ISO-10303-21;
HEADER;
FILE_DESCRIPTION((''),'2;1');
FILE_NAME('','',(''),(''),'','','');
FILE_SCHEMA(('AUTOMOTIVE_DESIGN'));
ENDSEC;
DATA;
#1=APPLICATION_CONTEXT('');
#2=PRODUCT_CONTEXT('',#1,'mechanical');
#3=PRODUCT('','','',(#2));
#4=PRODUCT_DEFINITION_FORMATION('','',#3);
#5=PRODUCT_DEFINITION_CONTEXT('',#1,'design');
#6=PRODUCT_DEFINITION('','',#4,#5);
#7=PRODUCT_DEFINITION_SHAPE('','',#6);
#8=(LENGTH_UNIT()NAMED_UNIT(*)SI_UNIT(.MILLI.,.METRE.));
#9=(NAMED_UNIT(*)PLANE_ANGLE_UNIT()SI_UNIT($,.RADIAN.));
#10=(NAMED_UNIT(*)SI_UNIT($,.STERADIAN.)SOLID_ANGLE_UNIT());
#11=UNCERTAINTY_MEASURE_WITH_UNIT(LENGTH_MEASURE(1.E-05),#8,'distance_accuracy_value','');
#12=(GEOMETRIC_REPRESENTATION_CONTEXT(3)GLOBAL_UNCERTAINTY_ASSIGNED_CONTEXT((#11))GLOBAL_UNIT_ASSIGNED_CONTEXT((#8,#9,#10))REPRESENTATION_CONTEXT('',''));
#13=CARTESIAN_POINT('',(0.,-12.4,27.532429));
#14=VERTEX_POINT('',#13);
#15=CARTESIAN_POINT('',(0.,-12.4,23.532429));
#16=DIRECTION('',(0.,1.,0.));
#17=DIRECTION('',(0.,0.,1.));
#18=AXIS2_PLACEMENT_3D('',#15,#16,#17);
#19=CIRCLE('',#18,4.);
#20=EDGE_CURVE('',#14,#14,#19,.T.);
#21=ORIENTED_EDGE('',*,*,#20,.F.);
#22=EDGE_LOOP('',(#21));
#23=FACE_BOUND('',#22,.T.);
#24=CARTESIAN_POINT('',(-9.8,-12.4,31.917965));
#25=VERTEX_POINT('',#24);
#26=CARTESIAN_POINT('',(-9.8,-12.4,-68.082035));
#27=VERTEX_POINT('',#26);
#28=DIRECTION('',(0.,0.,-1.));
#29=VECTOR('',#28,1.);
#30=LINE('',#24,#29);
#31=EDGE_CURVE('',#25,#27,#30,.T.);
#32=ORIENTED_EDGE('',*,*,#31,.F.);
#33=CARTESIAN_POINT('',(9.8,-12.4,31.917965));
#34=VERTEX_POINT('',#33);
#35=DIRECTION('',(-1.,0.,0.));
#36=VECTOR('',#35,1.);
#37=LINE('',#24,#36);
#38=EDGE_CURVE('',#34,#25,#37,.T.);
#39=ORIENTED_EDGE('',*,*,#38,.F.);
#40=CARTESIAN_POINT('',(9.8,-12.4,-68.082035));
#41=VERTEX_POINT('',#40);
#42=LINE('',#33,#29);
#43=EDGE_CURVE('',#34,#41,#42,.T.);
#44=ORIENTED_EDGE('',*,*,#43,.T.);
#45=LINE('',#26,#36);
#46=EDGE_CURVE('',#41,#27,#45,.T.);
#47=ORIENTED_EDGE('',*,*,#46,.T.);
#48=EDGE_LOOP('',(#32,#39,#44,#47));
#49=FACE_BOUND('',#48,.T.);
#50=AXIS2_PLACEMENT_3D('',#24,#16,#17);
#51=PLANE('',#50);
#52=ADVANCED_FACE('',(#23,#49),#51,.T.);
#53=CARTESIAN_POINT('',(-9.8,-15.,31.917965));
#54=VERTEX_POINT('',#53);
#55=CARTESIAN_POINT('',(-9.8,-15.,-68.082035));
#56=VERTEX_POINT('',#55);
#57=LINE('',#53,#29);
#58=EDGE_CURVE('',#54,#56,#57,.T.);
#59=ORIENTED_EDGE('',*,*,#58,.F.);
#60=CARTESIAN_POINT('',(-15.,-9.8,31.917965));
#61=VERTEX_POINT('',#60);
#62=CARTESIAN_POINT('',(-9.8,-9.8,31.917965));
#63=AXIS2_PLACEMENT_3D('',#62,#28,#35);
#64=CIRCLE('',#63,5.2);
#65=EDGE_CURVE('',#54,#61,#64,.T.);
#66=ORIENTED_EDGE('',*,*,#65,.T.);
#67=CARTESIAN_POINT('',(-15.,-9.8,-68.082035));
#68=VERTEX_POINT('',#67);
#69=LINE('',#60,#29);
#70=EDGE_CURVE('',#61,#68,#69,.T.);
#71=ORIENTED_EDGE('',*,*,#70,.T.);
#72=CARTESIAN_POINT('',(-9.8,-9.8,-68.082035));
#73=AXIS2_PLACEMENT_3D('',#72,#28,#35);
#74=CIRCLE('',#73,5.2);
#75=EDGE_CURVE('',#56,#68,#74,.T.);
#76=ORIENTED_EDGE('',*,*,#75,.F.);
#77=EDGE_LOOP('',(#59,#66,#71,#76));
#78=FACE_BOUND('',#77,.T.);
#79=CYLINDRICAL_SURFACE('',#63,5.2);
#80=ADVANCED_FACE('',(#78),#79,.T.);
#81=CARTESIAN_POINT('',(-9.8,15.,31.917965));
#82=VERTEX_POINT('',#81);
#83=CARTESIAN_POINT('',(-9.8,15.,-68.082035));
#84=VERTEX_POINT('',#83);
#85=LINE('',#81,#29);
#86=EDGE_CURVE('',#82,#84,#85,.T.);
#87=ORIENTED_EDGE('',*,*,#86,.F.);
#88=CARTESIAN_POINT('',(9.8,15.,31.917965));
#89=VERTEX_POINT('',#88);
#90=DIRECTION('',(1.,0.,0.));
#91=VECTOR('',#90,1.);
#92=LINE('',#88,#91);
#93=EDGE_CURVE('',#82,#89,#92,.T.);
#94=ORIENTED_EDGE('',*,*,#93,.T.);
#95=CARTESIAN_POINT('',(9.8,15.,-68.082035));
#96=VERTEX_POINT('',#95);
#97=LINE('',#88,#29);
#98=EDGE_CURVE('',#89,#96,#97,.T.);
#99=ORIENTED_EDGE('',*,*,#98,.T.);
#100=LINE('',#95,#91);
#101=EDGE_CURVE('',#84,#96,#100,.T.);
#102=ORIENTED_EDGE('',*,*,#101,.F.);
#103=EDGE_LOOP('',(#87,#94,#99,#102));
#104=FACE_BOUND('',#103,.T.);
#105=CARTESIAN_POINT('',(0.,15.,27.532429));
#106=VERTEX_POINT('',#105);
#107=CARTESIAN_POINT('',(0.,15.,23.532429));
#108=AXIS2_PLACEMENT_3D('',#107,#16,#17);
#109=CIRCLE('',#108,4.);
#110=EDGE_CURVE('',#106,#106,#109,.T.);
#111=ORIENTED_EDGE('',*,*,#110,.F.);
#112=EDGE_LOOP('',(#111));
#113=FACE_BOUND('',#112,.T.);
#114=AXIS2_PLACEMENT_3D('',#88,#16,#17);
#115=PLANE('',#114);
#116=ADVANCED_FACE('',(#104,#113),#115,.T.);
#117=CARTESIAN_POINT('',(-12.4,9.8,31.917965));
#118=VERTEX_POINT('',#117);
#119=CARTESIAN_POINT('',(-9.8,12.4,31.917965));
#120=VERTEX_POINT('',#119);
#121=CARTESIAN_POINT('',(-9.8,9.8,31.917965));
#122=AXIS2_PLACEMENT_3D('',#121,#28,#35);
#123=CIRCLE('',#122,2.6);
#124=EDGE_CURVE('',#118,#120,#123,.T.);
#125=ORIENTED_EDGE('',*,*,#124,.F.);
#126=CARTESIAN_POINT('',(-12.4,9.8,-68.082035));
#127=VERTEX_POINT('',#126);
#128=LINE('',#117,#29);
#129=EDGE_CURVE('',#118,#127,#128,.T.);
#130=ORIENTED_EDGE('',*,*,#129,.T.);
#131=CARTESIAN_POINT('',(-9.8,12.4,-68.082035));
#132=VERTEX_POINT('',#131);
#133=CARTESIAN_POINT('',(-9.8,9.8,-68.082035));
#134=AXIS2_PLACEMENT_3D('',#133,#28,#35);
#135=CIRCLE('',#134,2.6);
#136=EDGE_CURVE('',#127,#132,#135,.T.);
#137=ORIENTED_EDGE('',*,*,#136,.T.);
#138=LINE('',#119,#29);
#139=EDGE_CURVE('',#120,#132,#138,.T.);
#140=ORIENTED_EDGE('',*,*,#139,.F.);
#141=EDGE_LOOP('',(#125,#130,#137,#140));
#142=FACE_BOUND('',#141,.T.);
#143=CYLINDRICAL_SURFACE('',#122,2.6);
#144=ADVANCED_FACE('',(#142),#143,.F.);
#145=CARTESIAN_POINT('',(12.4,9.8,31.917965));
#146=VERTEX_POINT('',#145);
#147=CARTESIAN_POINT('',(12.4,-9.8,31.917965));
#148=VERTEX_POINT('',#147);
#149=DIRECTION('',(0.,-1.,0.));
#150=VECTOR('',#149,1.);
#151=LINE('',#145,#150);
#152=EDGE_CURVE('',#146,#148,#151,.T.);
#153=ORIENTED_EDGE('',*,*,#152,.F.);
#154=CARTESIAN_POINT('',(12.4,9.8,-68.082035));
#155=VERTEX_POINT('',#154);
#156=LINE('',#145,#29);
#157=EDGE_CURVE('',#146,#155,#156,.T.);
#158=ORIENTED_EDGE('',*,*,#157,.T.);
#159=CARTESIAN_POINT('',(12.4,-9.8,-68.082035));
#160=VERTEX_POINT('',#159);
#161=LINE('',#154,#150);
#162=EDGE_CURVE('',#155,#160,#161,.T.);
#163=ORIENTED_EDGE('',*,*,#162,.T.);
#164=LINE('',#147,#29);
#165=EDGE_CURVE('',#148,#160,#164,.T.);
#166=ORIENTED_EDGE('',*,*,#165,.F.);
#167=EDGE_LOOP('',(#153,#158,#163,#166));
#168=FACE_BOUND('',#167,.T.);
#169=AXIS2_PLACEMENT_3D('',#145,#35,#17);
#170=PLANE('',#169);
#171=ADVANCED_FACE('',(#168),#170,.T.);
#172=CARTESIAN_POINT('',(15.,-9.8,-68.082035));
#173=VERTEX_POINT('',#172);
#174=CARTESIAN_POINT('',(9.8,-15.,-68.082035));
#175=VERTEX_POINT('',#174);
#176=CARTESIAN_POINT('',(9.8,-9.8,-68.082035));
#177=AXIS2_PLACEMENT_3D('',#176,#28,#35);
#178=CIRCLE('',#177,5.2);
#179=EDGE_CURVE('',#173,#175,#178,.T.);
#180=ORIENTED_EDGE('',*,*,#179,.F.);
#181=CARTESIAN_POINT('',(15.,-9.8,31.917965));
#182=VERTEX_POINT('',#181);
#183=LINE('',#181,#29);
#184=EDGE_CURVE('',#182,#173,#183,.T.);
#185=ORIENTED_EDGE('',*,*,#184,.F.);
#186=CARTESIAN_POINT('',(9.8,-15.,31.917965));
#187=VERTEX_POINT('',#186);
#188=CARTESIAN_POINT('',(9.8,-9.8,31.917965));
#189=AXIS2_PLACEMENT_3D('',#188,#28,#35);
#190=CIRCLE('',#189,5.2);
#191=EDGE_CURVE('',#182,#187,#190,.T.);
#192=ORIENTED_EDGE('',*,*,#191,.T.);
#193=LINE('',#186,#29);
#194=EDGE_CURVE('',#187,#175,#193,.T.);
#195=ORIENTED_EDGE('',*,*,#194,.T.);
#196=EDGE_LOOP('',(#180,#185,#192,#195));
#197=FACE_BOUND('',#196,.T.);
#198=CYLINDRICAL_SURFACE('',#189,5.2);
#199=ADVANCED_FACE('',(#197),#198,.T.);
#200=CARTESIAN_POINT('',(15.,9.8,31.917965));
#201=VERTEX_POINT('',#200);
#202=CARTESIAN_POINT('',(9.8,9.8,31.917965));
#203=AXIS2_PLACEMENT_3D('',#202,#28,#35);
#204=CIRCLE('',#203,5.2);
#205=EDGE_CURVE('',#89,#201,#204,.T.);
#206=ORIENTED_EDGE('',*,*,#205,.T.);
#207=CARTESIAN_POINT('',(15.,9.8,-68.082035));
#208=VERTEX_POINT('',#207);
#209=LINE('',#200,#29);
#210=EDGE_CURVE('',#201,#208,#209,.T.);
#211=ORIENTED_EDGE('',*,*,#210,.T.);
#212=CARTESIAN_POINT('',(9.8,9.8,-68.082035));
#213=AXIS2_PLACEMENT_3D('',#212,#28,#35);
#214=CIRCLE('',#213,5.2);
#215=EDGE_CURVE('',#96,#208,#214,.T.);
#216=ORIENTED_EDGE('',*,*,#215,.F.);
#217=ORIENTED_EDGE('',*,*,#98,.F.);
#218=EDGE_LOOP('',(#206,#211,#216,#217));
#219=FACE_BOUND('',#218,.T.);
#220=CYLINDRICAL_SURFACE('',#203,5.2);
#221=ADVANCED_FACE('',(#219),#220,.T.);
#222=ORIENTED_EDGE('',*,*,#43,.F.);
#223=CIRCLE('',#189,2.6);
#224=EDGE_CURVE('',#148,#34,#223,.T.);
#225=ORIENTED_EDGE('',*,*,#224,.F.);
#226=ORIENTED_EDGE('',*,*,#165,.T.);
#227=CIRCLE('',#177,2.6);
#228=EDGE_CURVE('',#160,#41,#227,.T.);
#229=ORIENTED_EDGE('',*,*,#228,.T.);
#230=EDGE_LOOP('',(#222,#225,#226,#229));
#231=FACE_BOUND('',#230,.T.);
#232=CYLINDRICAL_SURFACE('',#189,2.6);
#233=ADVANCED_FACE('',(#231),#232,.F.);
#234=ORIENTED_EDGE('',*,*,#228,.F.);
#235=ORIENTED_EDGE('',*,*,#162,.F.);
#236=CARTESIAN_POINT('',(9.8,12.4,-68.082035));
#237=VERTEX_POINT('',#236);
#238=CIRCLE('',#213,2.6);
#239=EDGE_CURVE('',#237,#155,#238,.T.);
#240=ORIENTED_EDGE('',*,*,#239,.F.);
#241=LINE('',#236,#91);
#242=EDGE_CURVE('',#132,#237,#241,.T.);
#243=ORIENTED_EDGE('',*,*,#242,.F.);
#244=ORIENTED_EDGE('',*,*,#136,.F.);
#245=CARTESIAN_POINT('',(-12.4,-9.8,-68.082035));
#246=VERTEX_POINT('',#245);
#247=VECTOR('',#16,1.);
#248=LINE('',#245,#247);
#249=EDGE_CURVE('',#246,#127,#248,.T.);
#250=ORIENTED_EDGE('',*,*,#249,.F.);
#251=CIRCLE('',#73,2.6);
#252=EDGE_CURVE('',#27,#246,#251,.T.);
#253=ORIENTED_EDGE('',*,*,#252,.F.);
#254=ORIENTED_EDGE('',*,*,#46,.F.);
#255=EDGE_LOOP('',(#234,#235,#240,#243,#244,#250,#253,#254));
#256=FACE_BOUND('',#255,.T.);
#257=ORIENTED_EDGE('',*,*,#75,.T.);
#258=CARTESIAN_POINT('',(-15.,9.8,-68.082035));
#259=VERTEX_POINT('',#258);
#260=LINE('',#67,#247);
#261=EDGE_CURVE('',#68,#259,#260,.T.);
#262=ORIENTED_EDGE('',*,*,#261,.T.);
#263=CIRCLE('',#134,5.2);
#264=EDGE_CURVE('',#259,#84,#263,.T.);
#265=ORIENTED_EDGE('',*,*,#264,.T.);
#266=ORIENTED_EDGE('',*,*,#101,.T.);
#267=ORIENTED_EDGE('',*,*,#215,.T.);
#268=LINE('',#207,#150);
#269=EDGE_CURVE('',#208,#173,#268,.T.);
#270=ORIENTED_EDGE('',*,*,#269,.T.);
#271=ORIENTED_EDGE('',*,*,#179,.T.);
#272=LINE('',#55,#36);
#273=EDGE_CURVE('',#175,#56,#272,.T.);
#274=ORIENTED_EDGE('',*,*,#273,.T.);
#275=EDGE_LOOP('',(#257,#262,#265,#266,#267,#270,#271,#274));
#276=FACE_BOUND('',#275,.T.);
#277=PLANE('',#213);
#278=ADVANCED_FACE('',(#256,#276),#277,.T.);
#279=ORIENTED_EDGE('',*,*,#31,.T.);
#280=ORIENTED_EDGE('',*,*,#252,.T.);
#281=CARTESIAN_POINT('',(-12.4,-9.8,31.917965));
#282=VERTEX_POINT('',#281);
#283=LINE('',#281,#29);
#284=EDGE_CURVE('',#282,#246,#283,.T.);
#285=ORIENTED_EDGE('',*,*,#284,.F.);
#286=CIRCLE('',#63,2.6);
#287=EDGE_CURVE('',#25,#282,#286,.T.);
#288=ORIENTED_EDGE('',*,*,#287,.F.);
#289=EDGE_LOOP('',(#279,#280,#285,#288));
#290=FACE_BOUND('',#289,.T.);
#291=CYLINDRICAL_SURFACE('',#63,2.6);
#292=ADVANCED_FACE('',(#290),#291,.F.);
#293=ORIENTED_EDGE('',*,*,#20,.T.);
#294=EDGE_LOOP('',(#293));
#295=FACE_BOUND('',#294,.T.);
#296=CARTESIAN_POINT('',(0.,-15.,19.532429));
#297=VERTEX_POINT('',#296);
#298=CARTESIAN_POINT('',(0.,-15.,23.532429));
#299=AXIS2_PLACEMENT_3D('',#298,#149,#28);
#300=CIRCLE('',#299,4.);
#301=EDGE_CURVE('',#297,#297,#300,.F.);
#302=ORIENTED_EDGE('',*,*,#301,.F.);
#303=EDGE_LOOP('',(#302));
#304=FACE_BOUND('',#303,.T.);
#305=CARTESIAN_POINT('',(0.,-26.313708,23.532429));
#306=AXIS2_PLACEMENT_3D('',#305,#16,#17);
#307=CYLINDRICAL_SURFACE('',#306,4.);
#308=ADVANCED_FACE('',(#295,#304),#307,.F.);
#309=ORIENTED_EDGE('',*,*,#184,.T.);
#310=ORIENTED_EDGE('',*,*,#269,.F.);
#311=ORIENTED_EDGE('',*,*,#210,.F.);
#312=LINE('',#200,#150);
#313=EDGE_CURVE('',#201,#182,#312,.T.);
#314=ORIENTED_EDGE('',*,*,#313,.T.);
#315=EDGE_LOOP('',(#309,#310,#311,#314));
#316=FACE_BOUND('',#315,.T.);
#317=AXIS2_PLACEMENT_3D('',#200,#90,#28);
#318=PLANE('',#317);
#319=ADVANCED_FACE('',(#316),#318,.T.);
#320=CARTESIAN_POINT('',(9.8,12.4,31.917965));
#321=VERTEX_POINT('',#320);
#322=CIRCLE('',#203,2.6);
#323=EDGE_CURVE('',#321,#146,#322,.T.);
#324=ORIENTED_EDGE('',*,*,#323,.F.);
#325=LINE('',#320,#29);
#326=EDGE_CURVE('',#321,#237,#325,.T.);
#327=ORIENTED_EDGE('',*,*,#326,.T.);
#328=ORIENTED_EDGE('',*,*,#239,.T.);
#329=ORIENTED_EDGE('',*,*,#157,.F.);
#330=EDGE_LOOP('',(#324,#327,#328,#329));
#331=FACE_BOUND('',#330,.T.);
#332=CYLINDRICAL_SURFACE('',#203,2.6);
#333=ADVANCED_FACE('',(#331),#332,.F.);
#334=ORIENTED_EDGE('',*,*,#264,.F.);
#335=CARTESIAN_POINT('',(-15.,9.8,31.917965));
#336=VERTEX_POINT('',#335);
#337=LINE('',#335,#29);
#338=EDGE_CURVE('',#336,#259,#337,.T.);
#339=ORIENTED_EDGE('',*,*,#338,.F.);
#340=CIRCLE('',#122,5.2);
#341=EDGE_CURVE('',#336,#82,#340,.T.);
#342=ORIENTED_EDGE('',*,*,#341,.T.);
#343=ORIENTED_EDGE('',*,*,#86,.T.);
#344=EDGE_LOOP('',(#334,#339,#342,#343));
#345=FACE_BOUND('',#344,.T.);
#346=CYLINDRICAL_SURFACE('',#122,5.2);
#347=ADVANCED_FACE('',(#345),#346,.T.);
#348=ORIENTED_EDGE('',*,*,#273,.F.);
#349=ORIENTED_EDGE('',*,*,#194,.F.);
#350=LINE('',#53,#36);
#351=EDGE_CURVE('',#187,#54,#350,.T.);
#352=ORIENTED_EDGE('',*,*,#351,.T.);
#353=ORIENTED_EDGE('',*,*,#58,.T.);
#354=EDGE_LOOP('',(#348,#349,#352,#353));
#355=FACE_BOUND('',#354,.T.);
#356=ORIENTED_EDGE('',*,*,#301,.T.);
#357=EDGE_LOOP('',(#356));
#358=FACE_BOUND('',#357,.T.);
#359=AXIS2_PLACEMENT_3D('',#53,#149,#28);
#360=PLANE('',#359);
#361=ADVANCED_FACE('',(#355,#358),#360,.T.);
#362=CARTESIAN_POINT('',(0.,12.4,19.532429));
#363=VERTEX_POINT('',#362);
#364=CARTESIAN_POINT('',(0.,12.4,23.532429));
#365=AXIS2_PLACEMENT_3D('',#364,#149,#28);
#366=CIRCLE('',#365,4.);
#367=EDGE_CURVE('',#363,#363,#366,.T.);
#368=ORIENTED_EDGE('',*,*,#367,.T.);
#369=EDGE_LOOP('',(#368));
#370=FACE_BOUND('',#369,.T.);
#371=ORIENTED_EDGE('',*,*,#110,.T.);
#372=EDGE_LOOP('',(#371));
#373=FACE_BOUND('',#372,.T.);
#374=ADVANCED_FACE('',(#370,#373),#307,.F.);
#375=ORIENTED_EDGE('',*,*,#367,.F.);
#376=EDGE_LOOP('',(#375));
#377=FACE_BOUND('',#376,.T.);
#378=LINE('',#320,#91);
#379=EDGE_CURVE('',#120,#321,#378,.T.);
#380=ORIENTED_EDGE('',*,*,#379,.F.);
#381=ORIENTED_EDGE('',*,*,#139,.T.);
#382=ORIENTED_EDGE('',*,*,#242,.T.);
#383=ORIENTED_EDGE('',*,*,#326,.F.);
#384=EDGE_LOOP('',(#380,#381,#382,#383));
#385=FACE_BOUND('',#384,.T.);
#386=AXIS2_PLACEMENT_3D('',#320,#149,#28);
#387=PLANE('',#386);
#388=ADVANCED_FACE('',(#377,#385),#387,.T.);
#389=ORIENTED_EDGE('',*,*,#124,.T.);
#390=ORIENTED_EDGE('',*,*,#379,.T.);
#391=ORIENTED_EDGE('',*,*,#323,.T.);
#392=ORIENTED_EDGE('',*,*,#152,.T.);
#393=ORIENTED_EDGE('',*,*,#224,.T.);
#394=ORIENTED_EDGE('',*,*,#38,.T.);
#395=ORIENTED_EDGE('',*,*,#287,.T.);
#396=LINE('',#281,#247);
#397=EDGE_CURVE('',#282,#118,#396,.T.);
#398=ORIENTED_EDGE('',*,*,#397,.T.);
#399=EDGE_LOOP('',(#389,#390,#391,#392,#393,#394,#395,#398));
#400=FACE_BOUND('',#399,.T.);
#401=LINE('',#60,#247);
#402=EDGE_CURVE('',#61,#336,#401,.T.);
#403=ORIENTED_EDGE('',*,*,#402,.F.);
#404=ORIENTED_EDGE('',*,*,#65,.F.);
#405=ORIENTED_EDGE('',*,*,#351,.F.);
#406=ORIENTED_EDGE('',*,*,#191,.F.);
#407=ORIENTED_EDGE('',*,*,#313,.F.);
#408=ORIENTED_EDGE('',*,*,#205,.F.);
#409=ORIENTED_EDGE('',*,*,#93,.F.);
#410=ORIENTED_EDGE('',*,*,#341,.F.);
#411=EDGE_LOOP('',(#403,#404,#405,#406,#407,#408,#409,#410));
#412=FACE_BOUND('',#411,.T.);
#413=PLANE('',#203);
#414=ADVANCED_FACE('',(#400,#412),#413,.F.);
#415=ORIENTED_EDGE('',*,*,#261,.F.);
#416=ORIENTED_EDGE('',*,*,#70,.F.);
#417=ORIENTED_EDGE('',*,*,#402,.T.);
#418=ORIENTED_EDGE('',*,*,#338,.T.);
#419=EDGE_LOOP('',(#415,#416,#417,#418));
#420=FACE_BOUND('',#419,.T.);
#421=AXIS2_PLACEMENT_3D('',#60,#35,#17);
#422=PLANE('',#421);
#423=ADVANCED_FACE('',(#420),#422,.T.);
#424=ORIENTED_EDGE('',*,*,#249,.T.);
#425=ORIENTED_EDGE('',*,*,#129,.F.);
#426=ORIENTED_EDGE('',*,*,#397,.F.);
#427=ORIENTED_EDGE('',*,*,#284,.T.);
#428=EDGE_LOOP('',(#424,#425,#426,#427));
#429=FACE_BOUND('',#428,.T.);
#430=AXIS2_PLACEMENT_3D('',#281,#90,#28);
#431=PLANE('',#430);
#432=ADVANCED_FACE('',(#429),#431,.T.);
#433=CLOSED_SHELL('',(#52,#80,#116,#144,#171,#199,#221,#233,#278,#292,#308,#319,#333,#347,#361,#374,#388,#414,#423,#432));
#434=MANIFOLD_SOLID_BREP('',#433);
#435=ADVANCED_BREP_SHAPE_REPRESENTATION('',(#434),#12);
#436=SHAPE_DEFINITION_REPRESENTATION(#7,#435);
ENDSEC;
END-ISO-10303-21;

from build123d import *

# Parameters (mm, degrees)
SISTEMA_START              = -68.082035122
SISTEMA_ESTRUCTURAL2_DEPTH = 100
CORTAR_EXTRUIR1_REACH      = 77.896
CROQUIS9_R                 = 4


# Read off the part's stored shape, not the designer's step: Sistema estructural2
with BuildPart() as part:
    # Sistema estructural2 outline → Sistema estructural2 (new body)
    with BuildSketch(Plane.XY.offset(SISTEMA_START)):
        with BuildLine():
            ThreePointArc((15, 9.8), (13.476955262, 13.476955262), (9.8, 15))
            Line((9.8, 15), (-9.8, 15))
            ThreePointArc((-9.8, 15), (-13.476955262, 13.476955262), (-15, 9.8))
            Line((-15, 9.8), (-15, -9.8))
            ThreePointArc((-15, -9.8), (-13.476955262, -13.476955262), (-9.8, -15))
            Line((-9.8, -15), (9.8, -15))
            ThreePointArc((9.8, -15), (13.476955262, -13.476955262), (15, -9.8))
            Line((15, -9.8), (15, 9.8))
        make_face()
        with BuildLine():
            ThreePointArc((12.4, -9.8), (11.638477631, -11.638477631), (9.8, -12.4))
            Line((9.8, -12.4), (-9.8, -12.4))
            ThreePointArc((-9.8, -12.4), (-11.638477631, -11.638477631), (-12.4, -9.8))
            Line((-12.4, -9.8), (-12.4, 9.8))
            ThreePointArc((-12.4, 9.8), (-11.638477631, 11.638477631), (-9.8, 12.4))
            Line((-9.8, 12.4), (9.8, 12.4))
            ThreePointArc((9.8, 12.4), (11.638477631, 11.638477631), (12.4, 9.8))
            Line((12.4, 9.8), (12.4, -9.8))
        make_face(mode=Mode.SUBTRACT)
    extrude(amount=SISTEMA_ESTRUCTURAL2_DEPTH)

    # Cortar-Extruir1: up to this face of the body (flat: up to its plane)
    cortar_extruir1_end = Plane(part.part.faces().sort_by_distance((0, -15, -18.082035122))[0])
    # Croquis9 → Cortar-Extruir1 (cut, up to the picked face)
    with BuildSketch(Plane(origin=(0, 15, 0), x_dir=(1, 0, 0), z_dir=(0, 1, 0)), mode=Mode.PRIVATE) as cortar_extruir1_sk1:
        with Locations(Location((0, -23.532428894, 0), (0, 0, 270))):
            Circle(CROQUIS9_R)
    cortar_extruir1_tool1 = split(extrude(cortar_extruir1_sk1.sketch, amount=-CORTAR_EXTRUIR1_REACH, mode=Mode.PRIVATE), bisect_by=cortar_extruir1_end, keep=Keep.BOTH, mode=Mode.PRIVATE)
    add(cortar_extruir1_tool1.solids().sort_by(Axis((0, 15, 23.532429), (0, -1, 0)))[0], mode=Mode.SUBTRACT)


solid = part.part
